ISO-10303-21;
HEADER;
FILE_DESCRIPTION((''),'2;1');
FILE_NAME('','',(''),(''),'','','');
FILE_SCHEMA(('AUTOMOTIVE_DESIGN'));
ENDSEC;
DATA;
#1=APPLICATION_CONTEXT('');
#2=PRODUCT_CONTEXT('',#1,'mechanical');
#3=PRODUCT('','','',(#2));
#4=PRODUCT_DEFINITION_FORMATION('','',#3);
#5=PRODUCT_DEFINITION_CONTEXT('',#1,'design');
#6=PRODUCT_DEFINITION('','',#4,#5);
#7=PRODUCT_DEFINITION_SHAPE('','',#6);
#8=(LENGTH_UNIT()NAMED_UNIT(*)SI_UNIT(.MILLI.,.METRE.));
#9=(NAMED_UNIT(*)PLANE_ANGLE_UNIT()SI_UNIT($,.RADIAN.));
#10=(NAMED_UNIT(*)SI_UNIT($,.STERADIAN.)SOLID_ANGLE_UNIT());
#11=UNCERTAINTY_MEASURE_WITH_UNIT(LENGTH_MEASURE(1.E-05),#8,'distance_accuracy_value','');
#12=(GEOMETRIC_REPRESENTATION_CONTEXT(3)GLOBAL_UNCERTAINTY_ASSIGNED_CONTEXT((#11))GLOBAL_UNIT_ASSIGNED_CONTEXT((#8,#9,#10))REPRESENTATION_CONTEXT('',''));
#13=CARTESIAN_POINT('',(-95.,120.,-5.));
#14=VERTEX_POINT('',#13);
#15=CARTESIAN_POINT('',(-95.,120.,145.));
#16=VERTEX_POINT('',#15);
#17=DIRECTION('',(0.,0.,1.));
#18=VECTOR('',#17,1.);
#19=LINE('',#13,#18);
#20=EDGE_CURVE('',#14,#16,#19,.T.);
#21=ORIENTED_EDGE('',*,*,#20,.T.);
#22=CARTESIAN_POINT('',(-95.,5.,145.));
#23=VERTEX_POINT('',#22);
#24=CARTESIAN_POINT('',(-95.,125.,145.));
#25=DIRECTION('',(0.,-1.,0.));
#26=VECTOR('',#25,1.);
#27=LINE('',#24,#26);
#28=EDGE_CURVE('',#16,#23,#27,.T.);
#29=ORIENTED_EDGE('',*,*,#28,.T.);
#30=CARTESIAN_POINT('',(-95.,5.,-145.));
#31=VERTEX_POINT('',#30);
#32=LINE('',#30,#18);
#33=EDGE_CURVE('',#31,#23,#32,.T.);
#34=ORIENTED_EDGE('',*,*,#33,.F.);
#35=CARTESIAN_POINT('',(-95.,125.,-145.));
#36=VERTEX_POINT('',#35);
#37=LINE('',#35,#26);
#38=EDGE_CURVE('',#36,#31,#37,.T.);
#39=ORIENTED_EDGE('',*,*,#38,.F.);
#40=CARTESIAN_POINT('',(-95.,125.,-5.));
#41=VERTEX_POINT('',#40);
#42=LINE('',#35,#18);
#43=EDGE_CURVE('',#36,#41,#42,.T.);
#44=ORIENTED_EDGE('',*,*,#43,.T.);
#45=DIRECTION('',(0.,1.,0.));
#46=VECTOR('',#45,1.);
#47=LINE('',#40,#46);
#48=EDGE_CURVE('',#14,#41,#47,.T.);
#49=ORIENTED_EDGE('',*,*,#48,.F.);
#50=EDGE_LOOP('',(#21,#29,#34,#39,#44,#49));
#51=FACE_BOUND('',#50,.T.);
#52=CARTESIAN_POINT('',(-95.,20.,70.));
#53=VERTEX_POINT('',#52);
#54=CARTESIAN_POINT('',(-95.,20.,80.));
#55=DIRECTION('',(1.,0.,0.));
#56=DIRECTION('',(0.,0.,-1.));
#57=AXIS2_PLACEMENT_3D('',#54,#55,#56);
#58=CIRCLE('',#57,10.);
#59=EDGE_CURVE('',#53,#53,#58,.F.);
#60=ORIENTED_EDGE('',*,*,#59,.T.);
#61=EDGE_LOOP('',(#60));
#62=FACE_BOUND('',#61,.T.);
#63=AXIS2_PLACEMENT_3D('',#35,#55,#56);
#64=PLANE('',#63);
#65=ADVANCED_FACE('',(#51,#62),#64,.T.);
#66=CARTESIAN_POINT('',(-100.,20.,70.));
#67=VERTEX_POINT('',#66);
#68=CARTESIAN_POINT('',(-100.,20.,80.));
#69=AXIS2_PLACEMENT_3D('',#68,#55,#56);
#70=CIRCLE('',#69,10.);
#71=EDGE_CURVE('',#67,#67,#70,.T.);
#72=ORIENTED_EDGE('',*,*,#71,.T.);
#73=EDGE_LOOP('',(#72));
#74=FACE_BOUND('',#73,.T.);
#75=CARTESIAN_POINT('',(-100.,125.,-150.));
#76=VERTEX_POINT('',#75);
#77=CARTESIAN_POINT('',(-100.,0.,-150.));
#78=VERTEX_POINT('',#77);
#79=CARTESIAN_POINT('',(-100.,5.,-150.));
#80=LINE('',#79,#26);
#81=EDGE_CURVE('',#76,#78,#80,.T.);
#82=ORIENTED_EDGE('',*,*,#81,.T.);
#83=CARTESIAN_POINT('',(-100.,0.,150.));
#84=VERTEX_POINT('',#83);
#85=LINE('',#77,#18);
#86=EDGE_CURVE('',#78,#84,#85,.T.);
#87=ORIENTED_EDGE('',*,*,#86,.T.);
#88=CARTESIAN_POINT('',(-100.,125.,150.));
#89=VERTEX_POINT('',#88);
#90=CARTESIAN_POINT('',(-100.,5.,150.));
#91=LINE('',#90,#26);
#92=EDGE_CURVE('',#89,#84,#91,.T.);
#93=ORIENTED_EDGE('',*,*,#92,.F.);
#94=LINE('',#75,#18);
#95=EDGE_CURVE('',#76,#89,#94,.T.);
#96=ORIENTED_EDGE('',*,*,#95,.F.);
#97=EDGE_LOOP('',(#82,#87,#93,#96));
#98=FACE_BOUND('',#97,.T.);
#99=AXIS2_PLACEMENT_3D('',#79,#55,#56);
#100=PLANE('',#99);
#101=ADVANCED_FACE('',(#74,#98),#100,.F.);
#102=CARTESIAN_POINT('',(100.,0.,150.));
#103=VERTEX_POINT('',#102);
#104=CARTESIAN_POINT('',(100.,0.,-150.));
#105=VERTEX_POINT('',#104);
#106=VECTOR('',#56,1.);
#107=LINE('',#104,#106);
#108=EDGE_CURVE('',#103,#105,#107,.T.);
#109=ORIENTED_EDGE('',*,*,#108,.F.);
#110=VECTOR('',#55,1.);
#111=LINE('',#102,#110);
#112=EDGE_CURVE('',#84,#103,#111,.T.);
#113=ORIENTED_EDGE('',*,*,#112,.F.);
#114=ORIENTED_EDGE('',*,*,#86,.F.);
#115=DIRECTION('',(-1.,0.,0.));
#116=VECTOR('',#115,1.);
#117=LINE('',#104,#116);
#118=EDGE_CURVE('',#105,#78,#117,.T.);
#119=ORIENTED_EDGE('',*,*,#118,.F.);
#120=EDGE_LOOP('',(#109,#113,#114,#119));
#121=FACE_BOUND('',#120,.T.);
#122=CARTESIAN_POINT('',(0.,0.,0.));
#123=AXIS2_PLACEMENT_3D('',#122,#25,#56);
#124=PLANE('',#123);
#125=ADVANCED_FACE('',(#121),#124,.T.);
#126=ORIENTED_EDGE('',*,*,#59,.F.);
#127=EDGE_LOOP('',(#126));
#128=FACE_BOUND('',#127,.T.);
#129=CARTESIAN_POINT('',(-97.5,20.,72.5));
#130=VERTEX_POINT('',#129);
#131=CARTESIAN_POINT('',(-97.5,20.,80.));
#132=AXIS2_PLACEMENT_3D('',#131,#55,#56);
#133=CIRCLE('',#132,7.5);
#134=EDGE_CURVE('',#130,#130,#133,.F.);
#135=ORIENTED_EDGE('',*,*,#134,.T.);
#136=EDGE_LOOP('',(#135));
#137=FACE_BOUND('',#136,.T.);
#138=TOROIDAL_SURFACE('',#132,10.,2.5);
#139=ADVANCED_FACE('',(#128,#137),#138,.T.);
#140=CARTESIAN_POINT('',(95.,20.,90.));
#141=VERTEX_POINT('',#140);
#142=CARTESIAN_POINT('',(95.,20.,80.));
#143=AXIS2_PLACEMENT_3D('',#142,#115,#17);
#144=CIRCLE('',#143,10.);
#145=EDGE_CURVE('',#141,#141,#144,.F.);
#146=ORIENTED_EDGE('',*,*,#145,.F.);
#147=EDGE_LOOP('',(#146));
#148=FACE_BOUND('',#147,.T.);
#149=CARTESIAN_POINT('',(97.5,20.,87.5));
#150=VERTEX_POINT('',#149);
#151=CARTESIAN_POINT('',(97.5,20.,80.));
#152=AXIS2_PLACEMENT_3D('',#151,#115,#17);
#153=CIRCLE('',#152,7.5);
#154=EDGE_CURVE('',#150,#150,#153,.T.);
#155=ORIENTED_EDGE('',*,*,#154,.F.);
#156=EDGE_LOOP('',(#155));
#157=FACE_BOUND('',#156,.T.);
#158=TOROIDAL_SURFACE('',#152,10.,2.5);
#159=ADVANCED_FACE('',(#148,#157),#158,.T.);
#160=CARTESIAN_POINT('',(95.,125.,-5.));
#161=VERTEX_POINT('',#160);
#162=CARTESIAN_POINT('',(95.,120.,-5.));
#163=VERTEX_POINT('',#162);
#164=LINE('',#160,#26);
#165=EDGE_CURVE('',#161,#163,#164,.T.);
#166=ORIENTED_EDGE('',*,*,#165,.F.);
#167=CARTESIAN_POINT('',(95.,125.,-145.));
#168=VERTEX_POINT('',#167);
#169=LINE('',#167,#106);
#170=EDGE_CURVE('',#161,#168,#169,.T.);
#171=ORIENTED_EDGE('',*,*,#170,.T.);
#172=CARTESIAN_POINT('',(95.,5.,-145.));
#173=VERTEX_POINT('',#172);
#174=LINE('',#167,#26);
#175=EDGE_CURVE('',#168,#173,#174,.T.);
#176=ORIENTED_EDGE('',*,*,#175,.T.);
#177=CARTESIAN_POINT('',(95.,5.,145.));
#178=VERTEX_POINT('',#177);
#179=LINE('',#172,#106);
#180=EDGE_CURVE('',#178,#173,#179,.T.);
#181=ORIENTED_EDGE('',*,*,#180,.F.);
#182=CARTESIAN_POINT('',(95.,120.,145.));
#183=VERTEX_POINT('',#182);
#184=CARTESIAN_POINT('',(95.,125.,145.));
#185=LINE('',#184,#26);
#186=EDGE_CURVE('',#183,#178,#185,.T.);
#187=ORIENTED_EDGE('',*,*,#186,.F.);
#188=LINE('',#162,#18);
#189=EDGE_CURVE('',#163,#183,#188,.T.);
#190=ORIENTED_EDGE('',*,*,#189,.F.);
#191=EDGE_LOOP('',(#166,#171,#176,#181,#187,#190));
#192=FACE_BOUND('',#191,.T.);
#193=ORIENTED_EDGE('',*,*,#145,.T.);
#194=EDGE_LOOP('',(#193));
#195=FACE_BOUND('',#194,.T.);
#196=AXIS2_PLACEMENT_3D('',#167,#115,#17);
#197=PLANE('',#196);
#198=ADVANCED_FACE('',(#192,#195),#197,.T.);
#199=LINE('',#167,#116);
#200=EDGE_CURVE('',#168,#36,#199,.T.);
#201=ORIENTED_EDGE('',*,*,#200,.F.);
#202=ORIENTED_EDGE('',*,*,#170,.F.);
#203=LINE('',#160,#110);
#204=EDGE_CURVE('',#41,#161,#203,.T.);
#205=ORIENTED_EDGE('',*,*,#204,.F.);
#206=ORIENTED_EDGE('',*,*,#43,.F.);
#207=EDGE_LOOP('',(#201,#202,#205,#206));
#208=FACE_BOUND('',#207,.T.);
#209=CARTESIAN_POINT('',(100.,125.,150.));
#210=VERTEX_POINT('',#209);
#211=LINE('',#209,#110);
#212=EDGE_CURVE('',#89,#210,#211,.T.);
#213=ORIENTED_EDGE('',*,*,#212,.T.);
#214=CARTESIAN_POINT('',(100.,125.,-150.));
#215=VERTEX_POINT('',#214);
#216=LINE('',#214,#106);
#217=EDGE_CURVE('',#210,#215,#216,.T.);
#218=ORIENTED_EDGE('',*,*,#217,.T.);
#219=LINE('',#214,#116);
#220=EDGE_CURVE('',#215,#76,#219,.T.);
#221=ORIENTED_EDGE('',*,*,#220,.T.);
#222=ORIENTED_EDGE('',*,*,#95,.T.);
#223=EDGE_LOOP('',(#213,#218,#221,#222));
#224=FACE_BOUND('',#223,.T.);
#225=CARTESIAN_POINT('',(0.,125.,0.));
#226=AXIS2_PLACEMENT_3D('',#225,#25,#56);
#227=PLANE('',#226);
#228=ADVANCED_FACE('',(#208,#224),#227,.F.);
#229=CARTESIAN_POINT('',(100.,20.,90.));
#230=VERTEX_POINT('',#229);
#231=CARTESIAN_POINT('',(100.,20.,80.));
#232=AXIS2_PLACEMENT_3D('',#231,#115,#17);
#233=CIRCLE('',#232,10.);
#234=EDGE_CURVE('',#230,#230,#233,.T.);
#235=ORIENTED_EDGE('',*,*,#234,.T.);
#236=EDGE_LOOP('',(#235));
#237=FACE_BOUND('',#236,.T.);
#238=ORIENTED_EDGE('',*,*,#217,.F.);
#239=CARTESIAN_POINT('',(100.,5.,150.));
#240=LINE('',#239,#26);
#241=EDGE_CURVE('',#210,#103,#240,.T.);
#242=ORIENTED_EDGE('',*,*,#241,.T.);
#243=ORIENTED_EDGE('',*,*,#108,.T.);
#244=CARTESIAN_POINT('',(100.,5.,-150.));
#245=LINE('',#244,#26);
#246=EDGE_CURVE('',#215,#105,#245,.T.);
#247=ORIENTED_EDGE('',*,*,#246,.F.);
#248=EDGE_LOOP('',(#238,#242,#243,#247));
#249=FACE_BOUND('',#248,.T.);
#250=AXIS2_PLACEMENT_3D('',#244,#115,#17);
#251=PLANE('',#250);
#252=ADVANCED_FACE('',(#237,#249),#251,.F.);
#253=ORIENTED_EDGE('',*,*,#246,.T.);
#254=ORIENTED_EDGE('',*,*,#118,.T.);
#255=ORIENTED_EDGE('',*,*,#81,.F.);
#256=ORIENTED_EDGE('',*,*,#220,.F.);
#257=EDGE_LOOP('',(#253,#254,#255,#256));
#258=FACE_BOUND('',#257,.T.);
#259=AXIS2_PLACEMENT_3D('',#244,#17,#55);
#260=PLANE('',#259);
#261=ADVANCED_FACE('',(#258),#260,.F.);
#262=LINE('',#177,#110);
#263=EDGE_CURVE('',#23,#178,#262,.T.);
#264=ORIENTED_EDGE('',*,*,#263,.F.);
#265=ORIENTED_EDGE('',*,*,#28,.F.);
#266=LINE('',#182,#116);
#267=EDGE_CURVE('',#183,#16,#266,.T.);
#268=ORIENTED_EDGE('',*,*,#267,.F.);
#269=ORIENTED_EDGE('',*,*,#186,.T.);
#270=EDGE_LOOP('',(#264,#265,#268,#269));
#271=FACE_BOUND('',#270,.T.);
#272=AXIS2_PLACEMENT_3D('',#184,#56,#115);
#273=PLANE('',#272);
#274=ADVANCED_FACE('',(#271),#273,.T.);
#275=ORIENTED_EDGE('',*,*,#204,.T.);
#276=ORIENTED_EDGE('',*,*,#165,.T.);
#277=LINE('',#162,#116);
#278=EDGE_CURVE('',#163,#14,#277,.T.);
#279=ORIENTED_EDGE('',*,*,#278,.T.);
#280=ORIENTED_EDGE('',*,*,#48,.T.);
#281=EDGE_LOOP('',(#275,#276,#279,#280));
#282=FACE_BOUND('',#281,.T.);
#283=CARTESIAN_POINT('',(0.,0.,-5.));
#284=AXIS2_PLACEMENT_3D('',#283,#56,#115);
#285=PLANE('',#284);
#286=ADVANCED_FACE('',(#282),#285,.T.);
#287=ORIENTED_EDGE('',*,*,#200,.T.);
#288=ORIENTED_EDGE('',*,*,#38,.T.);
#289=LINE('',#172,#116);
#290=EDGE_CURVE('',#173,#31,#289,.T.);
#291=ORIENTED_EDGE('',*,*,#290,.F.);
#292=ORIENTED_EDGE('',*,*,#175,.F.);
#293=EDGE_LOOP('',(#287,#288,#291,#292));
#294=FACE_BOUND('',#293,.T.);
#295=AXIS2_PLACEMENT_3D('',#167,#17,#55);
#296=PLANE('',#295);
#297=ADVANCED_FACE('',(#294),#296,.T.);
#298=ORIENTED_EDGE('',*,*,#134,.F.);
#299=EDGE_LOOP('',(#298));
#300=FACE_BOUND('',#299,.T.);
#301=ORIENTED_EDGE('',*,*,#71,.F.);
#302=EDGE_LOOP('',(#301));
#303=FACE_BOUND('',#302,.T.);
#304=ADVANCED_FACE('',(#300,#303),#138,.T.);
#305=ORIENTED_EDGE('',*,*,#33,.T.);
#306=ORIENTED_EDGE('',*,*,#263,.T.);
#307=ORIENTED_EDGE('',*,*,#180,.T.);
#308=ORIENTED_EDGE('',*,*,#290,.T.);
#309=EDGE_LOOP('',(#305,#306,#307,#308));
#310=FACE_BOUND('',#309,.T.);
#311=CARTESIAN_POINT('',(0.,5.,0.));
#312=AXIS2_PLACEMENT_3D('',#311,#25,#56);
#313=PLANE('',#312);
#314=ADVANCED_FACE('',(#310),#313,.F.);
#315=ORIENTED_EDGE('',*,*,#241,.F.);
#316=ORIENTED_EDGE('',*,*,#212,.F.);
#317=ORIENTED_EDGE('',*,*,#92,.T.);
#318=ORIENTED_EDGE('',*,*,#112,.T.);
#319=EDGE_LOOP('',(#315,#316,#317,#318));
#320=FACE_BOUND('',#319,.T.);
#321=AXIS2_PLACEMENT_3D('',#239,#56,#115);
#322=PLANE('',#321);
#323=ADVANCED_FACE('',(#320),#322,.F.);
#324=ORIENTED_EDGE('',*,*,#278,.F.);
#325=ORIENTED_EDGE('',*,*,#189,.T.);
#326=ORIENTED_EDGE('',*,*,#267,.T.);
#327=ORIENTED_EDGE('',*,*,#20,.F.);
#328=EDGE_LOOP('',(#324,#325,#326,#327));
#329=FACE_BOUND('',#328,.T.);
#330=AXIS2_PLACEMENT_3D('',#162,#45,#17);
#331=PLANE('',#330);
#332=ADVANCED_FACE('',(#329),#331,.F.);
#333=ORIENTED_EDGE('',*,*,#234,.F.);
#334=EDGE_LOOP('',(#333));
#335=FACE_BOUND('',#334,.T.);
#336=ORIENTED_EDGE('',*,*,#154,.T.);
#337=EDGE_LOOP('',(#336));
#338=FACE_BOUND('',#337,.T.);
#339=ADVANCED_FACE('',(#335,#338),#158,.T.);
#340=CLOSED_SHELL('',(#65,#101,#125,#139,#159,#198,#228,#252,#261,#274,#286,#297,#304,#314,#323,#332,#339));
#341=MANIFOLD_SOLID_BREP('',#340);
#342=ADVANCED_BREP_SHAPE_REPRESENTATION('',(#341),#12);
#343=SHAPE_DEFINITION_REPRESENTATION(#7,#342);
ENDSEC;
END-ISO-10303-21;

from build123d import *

# Parameters (mm, degrees)
SKETCH2_W           = 200
SKETCH2_H           = 300
BOSS_EXTRUDE1_DEPTH = 5
SKETCH4_W           = 200
SKETCH4_H           = 300
SKETCH4_W_2         = 190
SKETCH4_H_2         = 290
BOSS_EXTRUDE2_DEPTH = 120
SKETCH5_W           = 190
SKETCH5_H           = 5
BOSS_EXTRUDE3_DEPTH = 150
SKETCH7_R           = 7.5
CUT_EXTRUDE1_DEPTH  = 215
FILLET4_R           = 2.5


with BuildPart() as part:
    # Sketch2 → Boss-Extrude1 (new body)
    with BuildSketch(Plane(origin=(0, 0, 0), x_dir=(1, 0, 0), z_dir=(0, 1, 0))):
        Rectangle(SKETCH2_W, SKETCH2_H)
    extrude(amount=BOSS_EXTRUDE1_DEPTH)

    # Sketch4 → Boss-Extrude2 (add)
    with BuildSketch(Plane(origin=(0, 5, 0), x_dir=(1, 0, 0), z_dir=(0, 1, 0))):
        Rectangle(SKETCH4_W, SKETCH4_H)
        Rectangle(SKETCH4_W_2, SKETCH4_H_2, mode=Mode.SUBTRACT)
    extrude(amount=BOSS_EXTRUDE2_DEPTH)

    # Sketch5 → Boss-Extrude3 (add)
    with BuildSketch(Plane(origin=(0, 0, 145), x_dir=(-1, 0, 0), z_dir=(0, 0, -1))):
        with Locations((0, 122.5)):
            Rectangle(SKETCH5_W, SKETCH5_H)
    extrude(amount=BOSS_EXTRUDE3_DEPTH)

    # Sketch7 → Cut-Extrude1 (cut, symmetric)
    with BuildSketch(Plane(origin=(-95, 0, 0), x_dir=(0, 0, -1), z_dir=(1, 0, 0))):
        with Locations(Location((-80, 20, 0), (0, 0, 180))):
            Circle(SKETCH7_R)
    extrude(amount=CUT_EXTRUDE1_DEPTH, both=True, mode=Mode.SUBTRACT)

    # Fillet4
    fillet4_edges = [part.edges().sort_by_distance(p)[0] for p in [
        (95, 20, 72.5),
        (-95, 20, 72.5),
        (-100, 20, 72.5),
        (100, 20, 72.5),
    ]]
    fillet(fillet4_edges, radius=FILLET4_R - 0.0001)  # a hair under: the kernel refuses the full size


solid = part.part
